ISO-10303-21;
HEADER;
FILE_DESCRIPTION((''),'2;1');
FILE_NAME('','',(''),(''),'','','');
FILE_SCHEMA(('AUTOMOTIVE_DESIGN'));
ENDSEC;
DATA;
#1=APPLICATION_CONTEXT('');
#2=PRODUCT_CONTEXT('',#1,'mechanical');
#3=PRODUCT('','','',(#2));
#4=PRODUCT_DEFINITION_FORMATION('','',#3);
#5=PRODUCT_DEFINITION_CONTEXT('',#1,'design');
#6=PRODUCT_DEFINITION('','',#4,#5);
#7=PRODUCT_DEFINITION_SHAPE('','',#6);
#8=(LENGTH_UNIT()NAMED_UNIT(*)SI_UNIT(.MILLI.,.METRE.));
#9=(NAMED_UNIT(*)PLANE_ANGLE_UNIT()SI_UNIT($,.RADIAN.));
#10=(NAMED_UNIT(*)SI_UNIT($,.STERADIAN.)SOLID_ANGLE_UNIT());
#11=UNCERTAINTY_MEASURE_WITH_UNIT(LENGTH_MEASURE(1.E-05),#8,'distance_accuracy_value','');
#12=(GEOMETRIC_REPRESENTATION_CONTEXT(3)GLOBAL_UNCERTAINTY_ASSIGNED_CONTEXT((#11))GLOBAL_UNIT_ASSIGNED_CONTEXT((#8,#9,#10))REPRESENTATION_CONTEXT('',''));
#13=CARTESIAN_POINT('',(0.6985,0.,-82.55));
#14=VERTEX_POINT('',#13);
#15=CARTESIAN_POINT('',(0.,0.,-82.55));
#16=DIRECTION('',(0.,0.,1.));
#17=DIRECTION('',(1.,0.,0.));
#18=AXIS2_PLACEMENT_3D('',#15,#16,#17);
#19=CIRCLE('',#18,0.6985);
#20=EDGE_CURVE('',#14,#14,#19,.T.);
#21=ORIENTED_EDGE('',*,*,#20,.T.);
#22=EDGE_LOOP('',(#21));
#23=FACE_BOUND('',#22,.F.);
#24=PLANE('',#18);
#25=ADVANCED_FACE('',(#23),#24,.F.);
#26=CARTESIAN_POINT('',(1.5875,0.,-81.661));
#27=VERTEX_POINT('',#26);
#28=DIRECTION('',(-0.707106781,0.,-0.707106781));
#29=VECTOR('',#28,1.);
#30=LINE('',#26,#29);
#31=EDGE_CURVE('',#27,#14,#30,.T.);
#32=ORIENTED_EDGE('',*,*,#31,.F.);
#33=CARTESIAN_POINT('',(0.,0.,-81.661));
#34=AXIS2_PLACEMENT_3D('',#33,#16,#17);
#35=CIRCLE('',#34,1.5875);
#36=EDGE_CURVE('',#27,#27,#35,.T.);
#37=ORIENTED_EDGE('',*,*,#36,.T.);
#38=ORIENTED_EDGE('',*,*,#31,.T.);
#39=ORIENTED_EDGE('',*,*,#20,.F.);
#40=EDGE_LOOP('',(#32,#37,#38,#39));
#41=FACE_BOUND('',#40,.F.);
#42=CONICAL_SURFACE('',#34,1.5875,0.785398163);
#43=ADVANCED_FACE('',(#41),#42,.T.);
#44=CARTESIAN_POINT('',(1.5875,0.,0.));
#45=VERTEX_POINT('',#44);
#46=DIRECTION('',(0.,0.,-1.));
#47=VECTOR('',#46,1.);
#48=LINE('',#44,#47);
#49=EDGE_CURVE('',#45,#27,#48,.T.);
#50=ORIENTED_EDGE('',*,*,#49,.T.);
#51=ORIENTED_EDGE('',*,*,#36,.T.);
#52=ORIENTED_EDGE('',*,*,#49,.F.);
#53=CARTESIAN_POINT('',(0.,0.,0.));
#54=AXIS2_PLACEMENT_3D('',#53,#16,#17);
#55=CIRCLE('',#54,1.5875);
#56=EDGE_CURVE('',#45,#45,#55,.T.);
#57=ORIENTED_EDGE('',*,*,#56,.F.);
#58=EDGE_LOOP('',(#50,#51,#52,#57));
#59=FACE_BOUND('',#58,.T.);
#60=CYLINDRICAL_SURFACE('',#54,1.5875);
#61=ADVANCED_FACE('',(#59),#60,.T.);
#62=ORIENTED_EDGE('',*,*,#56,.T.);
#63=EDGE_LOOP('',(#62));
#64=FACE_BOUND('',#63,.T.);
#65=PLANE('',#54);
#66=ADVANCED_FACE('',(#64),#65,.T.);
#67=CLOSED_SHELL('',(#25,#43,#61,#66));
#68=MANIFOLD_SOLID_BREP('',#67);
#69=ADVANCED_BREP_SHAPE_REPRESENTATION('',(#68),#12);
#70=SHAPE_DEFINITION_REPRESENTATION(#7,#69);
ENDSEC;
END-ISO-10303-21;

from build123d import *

# Parameters (mm, degrees)
F0_R     = 1.5875
F1_DEPTH = 82.55
F2_SIZE  = 0.889


# Not quite as in the source:
# - a length typed as a fraction of an inch, garbled in the dataset ("3 / 203.2 mm" for 3/8 in), is restored


with BuildPart() as f1:
    # F0 (on Top) → F1 (new body)
    with BuildSketch(Plane.XY):
        Circle(F0_R)
    extrude(amount=-F1_DEPTH)

    # F2
    f2_edges = [f1.edges().sort_by_distance(p)[0] for p in [
        (-1.5875, 0, -82.55),
    ]]
    chamfer(f2_edges, length=F2_SIZE)


solid = f1.part
